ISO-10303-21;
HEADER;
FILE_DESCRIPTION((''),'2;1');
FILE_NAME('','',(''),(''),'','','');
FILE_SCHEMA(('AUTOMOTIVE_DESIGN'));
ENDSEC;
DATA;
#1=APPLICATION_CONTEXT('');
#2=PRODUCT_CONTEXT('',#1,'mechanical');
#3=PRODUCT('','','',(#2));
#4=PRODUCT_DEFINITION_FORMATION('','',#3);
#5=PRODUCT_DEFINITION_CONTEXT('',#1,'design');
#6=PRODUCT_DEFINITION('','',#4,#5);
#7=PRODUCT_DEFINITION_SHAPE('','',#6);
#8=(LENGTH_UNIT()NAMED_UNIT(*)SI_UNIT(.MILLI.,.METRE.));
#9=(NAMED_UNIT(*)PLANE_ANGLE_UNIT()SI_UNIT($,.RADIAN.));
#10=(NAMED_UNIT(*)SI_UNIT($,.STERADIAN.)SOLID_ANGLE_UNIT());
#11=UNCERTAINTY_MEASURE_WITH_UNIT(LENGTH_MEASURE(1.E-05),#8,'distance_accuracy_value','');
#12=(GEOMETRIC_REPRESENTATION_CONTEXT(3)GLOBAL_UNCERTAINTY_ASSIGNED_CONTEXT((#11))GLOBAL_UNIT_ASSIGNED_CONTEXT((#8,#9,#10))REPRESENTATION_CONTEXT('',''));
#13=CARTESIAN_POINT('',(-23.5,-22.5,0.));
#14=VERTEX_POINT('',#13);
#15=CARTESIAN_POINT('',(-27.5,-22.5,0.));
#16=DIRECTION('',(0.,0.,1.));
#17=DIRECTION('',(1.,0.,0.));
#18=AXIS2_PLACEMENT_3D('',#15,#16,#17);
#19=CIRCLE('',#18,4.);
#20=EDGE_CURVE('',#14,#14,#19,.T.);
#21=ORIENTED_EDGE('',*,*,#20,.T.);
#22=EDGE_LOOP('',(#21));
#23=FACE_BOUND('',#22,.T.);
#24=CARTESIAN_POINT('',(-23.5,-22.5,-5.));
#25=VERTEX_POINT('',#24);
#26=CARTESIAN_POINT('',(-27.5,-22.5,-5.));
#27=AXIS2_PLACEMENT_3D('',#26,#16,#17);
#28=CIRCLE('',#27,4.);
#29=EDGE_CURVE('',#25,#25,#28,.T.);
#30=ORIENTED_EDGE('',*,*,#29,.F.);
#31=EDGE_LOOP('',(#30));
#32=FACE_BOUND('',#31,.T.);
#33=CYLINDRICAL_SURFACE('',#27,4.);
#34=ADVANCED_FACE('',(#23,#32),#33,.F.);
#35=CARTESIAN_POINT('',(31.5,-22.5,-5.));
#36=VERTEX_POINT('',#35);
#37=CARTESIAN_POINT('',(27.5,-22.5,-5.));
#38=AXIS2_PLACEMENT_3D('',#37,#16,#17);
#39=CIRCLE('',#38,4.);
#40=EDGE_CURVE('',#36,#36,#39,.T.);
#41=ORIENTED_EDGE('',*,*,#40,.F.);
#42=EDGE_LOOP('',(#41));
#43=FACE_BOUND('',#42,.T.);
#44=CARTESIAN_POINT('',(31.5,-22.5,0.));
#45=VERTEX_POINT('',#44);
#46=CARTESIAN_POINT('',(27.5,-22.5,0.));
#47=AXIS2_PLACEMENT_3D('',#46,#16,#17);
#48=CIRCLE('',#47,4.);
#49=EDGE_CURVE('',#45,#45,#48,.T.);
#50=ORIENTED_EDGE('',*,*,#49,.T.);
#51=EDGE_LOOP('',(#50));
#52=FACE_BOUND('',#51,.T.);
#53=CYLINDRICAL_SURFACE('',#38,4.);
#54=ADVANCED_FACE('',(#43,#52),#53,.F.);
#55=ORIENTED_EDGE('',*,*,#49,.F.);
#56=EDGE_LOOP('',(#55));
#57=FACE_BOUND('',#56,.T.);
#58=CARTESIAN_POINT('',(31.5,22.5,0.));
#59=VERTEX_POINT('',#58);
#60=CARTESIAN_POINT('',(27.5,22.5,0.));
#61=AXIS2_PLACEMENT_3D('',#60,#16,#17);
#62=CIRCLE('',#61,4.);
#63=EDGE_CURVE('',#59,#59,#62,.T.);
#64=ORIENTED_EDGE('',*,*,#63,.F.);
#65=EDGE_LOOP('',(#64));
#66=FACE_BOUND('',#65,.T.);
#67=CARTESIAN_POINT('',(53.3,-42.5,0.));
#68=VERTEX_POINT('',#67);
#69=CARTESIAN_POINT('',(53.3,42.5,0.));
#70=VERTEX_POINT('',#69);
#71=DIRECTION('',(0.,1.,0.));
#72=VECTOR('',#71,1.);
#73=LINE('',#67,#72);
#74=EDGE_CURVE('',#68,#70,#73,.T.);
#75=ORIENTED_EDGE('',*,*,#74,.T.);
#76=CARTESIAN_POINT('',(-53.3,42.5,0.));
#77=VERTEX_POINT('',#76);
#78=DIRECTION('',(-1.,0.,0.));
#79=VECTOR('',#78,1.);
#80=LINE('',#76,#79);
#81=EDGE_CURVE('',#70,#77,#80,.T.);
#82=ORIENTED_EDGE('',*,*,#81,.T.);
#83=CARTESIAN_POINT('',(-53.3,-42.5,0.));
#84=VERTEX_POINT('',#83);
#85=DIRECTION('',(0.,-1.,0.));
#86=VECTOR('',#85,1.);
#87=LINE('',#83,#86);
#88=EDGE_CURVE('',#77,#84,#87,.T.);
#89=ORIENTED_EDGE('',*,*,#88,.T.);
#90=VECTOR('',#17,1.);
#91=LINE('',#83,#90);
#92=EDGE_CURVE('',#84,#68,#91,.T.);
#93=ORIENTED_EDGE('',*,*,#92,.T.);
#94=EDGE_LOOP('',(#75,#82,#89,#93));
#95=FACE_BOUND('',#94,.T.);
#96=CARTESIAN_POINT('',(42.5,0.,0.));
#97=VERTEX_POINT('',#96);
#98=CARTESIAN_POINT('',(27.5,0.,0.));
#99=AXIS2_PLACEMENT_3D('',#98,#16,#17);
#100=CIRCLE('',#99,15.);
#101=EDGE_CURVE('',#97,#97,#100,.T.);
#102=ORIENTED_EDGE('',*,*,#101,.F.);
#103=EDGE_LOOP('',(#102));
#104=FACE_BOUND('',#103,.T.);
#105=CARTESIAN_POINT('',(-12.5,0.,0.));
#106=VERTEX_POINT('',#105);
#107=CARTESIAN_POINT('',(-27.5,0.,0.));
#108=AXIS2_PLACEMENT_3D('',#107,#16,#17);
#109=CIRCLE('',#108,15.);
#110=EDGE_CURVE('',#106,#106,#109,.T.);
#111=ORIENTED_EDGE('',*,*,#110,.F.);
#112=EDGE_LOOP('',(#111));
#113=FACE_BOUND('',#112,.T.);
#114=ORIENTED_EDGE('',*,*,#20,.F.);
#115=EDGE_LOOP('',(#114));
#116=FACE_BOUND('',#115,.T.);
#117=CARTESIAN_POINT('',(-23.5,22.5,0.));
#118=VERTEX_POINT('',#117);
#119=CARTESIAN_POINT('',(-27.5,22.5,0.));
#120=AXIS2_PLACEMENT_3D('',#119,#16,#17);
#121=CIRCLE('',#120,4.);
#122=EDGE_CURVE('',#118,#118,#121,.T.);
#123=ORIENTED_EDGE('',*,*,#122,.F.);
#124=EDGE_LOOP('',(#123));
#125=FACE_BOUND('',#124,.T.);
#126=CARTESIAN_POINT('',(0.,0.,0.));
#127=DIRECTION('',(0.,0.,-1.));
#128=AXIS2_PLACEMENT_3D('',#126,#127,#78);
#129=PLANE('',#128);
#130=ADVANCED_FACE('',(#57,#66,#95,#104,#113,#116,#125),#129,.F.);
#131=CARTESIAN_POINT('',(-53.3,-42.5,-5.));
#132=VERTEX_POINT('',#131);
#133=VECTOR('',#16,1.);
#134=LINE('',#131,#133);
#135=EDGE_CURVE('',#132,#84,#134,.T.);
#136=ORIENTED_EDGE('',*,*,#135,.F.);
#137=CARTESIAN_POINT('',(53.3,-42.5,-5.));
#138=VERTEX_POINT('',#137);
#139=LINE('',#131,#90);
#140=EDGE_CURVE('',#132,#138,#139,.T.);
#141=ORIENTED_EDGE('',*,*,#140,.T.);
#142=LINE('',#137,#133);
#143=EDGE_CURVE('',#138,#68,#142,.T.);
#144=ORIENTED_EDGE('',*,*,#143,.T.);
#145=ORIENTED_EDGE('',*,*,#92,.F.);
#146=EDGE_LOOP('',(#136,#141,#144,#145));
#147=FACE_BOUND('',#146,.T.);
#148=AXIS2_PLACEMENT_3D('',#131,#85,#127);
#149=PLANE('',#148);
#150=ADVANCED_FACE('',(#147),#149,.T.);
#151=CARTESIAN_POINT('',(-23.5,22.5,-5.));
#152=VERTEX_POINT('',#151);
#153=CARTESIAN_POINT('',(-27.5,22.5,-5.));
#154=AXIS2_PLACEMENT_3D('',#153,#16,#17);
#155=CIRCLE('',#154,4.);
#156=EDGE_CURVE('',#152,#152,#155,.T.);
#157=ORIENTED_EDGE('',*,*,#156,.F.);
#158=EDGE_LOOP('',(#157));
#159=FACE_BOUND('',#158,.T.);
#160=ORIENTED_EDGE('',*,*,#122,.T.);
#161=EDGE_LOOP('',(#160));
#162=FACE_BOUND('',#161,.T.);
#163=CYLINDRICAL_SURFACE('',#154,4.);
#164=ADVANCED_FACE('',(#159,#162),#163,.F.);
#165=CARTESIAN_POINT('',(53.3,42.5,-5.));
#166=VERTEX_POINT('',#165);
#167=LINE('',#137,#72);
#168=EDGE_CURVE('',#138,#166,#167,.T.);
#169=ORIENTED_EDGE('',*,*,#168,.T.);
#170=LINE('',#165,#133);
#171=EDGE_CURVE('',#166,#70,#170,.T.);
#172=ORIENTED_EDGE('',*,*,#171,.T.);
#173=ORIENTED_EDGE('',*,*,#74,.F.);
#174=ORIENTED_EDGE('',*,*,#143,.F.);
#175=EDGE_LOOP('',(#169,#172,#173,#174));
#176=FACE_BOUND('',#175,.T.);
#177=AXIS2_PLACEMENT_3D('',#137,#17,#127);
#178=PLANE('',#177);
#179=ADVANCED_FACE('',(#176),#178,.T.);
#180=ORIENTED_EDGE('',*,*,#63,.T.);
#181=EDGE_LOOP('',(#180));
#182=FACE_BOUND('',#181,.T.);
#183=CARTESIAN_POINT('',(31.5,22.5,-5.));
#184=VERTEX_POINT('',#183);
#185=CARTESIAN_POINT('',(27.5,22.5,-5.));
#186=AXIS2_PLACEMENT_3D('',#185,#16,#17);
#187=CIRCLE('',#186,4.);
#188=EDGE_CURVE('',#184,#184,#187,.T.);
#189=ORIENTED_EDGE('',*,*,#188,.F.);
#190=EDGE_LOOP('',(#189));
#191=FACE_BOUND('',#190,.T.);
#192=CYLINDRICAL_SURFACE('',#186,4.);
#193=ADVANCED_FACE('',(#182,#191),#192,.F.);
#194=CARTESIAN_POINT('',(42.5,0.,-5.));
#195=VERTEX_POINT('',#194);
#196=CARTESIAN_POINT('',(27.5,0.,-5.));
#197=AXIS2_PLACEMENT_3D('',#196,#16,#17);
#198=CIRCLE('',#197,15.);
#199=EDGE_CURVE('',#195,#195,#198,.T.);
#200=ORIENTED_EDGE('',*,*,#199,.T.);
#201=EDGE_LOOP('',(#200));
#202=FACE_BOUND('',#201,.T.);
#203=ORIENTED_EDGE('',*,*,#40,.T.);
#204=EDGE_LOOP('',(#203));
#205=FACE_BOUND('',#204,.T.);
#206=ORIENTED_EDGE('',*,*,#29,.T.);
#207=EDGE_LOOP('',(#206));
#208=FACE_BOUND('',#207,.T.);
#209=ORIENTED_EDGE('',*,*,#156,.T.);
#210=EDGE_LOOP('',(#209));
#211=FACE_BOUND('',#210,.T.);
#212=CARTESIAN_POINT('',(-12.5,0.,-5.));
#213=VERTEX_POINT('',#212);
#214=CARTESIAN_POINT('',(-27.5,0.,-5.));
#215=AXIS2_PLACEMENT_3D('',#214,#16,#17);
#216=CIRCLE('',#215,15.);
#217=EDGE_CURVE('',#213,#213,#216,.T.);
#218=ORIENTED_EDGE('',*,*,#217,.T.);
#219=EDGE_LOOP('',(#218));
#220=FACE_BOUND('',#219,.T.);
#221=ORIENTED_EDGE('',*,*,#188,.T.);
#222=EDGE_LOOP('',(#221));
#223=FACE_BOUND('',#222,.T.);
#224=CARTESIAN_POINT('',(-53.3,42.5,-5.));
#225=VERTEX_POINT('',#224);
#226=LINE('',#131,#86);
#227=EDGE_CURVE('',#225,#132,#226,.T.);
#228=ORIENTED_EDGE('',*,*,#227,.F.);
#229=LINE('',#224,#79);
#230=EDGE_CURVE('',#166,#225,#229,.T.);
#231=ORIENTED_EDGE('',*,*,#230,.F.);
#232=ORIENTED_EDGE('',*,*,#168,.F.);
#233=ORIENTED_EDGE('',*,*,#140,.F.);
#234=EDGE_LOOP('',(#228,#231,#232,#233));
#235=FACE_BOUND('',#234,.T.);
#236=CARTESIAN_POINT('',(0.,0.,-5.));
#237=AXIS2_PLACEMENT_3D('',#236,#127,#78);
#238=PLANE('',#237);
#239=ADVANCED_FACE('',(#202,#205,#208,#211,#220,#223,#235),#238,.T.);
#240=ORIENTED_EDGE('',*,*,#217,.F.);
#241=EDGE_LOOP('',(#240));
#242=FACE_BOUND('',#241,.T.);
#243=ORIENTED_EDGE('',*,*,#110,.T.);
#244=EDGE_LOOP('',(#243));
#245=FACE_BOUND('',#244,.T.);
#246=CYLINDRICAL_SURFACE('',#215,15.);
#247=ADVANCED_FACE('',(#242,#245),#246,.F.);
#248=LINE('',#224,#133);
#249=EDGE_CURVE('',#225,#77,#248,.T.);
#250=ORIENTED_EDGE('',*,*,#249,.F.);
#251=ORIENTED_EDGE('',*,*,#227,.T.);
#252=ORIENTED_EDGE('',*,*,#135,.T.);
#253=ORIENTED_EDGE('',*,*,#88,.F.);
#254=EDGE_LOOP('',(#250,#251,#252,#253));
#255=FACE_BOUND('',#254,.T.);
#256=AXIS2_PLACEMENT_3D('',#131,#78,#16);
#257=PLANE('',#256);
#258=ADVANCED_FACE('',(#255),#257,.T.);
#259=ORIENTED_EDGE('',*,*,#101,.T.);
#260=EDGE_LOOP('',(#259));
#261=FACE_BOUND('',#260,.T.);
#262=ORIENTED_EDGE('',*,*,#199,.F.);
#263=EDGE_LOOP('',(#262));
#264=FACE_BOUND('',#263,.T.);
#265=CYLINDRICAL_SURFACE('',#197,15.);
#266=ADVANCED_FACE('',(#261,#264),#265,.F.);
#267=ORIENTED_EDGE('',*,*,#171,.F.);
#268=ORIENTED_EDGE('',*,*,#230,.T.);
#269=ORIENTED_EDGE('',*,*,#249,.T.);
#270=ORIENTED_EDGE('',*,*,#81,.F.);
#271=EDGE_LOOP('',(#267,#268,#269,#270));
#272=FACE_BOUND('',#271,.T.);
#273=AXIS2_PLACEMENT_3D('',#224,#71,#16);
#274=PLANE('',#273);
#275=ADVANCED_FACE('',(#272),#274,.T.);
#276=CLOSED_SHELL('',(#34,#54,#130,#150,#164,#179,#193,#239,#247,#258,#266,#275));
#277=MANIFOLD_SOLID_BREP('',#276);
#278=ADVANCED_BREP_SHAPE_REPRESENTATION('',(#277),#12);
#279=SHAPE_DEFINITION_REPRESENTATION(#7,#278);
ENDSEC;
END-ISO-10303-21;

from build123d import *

# Parameters (mm, degrees)
SZKIC1_W                   = 106.6
SZKIC1_H                   = 85
ODGI_CIE_BAZOWE1_DEPTH     = 5
SZKIC6_R                   = 15
SZKIC6_R_2                 = 4
WYTNIJ_WYCI_GNI_CIE1_DEPTH = 69.353054065


# Sheet-metal steps are written as plain solids
with BuildPart() as part:
    # Szkic1 → Odgięcie bazowe1 (new body)
    with BuildSketch(Plane.XY):
        Rectangle(SZKIC1_W, SZKIC1_H)
    extrude(amount=-ODGI_CIE_BAZOWE1_DEPTH)

    # Szkic6 → Wytnij-wyciągnięcie1 (cut, through all)
    with BuildSketch(Plane.XY):
        with Locations((-27.5, 0)):
            Circle(SZKIC6_R)
        with Locations((27.5, 0)):
            Circle(SZKIC6_R)
        with Locations((-27.5, 22.5)):
            Circle(SZKIC6_R_2)
        with Locations((27.5, 22.5)):
            Circle(SZKIC6_R_2)
        with Locations((27.5, -22.5)):
            Circle(SZKIC6_R_2)
        with Locations((-27.5, -22.5)):
            Circle(SZKIC6_R_2)
    extrude(amount=-WYTNIJ_WYCI_GNI_CIE1_DEPTH, mode=Mode.SUBTRACT)


solid = part.part
